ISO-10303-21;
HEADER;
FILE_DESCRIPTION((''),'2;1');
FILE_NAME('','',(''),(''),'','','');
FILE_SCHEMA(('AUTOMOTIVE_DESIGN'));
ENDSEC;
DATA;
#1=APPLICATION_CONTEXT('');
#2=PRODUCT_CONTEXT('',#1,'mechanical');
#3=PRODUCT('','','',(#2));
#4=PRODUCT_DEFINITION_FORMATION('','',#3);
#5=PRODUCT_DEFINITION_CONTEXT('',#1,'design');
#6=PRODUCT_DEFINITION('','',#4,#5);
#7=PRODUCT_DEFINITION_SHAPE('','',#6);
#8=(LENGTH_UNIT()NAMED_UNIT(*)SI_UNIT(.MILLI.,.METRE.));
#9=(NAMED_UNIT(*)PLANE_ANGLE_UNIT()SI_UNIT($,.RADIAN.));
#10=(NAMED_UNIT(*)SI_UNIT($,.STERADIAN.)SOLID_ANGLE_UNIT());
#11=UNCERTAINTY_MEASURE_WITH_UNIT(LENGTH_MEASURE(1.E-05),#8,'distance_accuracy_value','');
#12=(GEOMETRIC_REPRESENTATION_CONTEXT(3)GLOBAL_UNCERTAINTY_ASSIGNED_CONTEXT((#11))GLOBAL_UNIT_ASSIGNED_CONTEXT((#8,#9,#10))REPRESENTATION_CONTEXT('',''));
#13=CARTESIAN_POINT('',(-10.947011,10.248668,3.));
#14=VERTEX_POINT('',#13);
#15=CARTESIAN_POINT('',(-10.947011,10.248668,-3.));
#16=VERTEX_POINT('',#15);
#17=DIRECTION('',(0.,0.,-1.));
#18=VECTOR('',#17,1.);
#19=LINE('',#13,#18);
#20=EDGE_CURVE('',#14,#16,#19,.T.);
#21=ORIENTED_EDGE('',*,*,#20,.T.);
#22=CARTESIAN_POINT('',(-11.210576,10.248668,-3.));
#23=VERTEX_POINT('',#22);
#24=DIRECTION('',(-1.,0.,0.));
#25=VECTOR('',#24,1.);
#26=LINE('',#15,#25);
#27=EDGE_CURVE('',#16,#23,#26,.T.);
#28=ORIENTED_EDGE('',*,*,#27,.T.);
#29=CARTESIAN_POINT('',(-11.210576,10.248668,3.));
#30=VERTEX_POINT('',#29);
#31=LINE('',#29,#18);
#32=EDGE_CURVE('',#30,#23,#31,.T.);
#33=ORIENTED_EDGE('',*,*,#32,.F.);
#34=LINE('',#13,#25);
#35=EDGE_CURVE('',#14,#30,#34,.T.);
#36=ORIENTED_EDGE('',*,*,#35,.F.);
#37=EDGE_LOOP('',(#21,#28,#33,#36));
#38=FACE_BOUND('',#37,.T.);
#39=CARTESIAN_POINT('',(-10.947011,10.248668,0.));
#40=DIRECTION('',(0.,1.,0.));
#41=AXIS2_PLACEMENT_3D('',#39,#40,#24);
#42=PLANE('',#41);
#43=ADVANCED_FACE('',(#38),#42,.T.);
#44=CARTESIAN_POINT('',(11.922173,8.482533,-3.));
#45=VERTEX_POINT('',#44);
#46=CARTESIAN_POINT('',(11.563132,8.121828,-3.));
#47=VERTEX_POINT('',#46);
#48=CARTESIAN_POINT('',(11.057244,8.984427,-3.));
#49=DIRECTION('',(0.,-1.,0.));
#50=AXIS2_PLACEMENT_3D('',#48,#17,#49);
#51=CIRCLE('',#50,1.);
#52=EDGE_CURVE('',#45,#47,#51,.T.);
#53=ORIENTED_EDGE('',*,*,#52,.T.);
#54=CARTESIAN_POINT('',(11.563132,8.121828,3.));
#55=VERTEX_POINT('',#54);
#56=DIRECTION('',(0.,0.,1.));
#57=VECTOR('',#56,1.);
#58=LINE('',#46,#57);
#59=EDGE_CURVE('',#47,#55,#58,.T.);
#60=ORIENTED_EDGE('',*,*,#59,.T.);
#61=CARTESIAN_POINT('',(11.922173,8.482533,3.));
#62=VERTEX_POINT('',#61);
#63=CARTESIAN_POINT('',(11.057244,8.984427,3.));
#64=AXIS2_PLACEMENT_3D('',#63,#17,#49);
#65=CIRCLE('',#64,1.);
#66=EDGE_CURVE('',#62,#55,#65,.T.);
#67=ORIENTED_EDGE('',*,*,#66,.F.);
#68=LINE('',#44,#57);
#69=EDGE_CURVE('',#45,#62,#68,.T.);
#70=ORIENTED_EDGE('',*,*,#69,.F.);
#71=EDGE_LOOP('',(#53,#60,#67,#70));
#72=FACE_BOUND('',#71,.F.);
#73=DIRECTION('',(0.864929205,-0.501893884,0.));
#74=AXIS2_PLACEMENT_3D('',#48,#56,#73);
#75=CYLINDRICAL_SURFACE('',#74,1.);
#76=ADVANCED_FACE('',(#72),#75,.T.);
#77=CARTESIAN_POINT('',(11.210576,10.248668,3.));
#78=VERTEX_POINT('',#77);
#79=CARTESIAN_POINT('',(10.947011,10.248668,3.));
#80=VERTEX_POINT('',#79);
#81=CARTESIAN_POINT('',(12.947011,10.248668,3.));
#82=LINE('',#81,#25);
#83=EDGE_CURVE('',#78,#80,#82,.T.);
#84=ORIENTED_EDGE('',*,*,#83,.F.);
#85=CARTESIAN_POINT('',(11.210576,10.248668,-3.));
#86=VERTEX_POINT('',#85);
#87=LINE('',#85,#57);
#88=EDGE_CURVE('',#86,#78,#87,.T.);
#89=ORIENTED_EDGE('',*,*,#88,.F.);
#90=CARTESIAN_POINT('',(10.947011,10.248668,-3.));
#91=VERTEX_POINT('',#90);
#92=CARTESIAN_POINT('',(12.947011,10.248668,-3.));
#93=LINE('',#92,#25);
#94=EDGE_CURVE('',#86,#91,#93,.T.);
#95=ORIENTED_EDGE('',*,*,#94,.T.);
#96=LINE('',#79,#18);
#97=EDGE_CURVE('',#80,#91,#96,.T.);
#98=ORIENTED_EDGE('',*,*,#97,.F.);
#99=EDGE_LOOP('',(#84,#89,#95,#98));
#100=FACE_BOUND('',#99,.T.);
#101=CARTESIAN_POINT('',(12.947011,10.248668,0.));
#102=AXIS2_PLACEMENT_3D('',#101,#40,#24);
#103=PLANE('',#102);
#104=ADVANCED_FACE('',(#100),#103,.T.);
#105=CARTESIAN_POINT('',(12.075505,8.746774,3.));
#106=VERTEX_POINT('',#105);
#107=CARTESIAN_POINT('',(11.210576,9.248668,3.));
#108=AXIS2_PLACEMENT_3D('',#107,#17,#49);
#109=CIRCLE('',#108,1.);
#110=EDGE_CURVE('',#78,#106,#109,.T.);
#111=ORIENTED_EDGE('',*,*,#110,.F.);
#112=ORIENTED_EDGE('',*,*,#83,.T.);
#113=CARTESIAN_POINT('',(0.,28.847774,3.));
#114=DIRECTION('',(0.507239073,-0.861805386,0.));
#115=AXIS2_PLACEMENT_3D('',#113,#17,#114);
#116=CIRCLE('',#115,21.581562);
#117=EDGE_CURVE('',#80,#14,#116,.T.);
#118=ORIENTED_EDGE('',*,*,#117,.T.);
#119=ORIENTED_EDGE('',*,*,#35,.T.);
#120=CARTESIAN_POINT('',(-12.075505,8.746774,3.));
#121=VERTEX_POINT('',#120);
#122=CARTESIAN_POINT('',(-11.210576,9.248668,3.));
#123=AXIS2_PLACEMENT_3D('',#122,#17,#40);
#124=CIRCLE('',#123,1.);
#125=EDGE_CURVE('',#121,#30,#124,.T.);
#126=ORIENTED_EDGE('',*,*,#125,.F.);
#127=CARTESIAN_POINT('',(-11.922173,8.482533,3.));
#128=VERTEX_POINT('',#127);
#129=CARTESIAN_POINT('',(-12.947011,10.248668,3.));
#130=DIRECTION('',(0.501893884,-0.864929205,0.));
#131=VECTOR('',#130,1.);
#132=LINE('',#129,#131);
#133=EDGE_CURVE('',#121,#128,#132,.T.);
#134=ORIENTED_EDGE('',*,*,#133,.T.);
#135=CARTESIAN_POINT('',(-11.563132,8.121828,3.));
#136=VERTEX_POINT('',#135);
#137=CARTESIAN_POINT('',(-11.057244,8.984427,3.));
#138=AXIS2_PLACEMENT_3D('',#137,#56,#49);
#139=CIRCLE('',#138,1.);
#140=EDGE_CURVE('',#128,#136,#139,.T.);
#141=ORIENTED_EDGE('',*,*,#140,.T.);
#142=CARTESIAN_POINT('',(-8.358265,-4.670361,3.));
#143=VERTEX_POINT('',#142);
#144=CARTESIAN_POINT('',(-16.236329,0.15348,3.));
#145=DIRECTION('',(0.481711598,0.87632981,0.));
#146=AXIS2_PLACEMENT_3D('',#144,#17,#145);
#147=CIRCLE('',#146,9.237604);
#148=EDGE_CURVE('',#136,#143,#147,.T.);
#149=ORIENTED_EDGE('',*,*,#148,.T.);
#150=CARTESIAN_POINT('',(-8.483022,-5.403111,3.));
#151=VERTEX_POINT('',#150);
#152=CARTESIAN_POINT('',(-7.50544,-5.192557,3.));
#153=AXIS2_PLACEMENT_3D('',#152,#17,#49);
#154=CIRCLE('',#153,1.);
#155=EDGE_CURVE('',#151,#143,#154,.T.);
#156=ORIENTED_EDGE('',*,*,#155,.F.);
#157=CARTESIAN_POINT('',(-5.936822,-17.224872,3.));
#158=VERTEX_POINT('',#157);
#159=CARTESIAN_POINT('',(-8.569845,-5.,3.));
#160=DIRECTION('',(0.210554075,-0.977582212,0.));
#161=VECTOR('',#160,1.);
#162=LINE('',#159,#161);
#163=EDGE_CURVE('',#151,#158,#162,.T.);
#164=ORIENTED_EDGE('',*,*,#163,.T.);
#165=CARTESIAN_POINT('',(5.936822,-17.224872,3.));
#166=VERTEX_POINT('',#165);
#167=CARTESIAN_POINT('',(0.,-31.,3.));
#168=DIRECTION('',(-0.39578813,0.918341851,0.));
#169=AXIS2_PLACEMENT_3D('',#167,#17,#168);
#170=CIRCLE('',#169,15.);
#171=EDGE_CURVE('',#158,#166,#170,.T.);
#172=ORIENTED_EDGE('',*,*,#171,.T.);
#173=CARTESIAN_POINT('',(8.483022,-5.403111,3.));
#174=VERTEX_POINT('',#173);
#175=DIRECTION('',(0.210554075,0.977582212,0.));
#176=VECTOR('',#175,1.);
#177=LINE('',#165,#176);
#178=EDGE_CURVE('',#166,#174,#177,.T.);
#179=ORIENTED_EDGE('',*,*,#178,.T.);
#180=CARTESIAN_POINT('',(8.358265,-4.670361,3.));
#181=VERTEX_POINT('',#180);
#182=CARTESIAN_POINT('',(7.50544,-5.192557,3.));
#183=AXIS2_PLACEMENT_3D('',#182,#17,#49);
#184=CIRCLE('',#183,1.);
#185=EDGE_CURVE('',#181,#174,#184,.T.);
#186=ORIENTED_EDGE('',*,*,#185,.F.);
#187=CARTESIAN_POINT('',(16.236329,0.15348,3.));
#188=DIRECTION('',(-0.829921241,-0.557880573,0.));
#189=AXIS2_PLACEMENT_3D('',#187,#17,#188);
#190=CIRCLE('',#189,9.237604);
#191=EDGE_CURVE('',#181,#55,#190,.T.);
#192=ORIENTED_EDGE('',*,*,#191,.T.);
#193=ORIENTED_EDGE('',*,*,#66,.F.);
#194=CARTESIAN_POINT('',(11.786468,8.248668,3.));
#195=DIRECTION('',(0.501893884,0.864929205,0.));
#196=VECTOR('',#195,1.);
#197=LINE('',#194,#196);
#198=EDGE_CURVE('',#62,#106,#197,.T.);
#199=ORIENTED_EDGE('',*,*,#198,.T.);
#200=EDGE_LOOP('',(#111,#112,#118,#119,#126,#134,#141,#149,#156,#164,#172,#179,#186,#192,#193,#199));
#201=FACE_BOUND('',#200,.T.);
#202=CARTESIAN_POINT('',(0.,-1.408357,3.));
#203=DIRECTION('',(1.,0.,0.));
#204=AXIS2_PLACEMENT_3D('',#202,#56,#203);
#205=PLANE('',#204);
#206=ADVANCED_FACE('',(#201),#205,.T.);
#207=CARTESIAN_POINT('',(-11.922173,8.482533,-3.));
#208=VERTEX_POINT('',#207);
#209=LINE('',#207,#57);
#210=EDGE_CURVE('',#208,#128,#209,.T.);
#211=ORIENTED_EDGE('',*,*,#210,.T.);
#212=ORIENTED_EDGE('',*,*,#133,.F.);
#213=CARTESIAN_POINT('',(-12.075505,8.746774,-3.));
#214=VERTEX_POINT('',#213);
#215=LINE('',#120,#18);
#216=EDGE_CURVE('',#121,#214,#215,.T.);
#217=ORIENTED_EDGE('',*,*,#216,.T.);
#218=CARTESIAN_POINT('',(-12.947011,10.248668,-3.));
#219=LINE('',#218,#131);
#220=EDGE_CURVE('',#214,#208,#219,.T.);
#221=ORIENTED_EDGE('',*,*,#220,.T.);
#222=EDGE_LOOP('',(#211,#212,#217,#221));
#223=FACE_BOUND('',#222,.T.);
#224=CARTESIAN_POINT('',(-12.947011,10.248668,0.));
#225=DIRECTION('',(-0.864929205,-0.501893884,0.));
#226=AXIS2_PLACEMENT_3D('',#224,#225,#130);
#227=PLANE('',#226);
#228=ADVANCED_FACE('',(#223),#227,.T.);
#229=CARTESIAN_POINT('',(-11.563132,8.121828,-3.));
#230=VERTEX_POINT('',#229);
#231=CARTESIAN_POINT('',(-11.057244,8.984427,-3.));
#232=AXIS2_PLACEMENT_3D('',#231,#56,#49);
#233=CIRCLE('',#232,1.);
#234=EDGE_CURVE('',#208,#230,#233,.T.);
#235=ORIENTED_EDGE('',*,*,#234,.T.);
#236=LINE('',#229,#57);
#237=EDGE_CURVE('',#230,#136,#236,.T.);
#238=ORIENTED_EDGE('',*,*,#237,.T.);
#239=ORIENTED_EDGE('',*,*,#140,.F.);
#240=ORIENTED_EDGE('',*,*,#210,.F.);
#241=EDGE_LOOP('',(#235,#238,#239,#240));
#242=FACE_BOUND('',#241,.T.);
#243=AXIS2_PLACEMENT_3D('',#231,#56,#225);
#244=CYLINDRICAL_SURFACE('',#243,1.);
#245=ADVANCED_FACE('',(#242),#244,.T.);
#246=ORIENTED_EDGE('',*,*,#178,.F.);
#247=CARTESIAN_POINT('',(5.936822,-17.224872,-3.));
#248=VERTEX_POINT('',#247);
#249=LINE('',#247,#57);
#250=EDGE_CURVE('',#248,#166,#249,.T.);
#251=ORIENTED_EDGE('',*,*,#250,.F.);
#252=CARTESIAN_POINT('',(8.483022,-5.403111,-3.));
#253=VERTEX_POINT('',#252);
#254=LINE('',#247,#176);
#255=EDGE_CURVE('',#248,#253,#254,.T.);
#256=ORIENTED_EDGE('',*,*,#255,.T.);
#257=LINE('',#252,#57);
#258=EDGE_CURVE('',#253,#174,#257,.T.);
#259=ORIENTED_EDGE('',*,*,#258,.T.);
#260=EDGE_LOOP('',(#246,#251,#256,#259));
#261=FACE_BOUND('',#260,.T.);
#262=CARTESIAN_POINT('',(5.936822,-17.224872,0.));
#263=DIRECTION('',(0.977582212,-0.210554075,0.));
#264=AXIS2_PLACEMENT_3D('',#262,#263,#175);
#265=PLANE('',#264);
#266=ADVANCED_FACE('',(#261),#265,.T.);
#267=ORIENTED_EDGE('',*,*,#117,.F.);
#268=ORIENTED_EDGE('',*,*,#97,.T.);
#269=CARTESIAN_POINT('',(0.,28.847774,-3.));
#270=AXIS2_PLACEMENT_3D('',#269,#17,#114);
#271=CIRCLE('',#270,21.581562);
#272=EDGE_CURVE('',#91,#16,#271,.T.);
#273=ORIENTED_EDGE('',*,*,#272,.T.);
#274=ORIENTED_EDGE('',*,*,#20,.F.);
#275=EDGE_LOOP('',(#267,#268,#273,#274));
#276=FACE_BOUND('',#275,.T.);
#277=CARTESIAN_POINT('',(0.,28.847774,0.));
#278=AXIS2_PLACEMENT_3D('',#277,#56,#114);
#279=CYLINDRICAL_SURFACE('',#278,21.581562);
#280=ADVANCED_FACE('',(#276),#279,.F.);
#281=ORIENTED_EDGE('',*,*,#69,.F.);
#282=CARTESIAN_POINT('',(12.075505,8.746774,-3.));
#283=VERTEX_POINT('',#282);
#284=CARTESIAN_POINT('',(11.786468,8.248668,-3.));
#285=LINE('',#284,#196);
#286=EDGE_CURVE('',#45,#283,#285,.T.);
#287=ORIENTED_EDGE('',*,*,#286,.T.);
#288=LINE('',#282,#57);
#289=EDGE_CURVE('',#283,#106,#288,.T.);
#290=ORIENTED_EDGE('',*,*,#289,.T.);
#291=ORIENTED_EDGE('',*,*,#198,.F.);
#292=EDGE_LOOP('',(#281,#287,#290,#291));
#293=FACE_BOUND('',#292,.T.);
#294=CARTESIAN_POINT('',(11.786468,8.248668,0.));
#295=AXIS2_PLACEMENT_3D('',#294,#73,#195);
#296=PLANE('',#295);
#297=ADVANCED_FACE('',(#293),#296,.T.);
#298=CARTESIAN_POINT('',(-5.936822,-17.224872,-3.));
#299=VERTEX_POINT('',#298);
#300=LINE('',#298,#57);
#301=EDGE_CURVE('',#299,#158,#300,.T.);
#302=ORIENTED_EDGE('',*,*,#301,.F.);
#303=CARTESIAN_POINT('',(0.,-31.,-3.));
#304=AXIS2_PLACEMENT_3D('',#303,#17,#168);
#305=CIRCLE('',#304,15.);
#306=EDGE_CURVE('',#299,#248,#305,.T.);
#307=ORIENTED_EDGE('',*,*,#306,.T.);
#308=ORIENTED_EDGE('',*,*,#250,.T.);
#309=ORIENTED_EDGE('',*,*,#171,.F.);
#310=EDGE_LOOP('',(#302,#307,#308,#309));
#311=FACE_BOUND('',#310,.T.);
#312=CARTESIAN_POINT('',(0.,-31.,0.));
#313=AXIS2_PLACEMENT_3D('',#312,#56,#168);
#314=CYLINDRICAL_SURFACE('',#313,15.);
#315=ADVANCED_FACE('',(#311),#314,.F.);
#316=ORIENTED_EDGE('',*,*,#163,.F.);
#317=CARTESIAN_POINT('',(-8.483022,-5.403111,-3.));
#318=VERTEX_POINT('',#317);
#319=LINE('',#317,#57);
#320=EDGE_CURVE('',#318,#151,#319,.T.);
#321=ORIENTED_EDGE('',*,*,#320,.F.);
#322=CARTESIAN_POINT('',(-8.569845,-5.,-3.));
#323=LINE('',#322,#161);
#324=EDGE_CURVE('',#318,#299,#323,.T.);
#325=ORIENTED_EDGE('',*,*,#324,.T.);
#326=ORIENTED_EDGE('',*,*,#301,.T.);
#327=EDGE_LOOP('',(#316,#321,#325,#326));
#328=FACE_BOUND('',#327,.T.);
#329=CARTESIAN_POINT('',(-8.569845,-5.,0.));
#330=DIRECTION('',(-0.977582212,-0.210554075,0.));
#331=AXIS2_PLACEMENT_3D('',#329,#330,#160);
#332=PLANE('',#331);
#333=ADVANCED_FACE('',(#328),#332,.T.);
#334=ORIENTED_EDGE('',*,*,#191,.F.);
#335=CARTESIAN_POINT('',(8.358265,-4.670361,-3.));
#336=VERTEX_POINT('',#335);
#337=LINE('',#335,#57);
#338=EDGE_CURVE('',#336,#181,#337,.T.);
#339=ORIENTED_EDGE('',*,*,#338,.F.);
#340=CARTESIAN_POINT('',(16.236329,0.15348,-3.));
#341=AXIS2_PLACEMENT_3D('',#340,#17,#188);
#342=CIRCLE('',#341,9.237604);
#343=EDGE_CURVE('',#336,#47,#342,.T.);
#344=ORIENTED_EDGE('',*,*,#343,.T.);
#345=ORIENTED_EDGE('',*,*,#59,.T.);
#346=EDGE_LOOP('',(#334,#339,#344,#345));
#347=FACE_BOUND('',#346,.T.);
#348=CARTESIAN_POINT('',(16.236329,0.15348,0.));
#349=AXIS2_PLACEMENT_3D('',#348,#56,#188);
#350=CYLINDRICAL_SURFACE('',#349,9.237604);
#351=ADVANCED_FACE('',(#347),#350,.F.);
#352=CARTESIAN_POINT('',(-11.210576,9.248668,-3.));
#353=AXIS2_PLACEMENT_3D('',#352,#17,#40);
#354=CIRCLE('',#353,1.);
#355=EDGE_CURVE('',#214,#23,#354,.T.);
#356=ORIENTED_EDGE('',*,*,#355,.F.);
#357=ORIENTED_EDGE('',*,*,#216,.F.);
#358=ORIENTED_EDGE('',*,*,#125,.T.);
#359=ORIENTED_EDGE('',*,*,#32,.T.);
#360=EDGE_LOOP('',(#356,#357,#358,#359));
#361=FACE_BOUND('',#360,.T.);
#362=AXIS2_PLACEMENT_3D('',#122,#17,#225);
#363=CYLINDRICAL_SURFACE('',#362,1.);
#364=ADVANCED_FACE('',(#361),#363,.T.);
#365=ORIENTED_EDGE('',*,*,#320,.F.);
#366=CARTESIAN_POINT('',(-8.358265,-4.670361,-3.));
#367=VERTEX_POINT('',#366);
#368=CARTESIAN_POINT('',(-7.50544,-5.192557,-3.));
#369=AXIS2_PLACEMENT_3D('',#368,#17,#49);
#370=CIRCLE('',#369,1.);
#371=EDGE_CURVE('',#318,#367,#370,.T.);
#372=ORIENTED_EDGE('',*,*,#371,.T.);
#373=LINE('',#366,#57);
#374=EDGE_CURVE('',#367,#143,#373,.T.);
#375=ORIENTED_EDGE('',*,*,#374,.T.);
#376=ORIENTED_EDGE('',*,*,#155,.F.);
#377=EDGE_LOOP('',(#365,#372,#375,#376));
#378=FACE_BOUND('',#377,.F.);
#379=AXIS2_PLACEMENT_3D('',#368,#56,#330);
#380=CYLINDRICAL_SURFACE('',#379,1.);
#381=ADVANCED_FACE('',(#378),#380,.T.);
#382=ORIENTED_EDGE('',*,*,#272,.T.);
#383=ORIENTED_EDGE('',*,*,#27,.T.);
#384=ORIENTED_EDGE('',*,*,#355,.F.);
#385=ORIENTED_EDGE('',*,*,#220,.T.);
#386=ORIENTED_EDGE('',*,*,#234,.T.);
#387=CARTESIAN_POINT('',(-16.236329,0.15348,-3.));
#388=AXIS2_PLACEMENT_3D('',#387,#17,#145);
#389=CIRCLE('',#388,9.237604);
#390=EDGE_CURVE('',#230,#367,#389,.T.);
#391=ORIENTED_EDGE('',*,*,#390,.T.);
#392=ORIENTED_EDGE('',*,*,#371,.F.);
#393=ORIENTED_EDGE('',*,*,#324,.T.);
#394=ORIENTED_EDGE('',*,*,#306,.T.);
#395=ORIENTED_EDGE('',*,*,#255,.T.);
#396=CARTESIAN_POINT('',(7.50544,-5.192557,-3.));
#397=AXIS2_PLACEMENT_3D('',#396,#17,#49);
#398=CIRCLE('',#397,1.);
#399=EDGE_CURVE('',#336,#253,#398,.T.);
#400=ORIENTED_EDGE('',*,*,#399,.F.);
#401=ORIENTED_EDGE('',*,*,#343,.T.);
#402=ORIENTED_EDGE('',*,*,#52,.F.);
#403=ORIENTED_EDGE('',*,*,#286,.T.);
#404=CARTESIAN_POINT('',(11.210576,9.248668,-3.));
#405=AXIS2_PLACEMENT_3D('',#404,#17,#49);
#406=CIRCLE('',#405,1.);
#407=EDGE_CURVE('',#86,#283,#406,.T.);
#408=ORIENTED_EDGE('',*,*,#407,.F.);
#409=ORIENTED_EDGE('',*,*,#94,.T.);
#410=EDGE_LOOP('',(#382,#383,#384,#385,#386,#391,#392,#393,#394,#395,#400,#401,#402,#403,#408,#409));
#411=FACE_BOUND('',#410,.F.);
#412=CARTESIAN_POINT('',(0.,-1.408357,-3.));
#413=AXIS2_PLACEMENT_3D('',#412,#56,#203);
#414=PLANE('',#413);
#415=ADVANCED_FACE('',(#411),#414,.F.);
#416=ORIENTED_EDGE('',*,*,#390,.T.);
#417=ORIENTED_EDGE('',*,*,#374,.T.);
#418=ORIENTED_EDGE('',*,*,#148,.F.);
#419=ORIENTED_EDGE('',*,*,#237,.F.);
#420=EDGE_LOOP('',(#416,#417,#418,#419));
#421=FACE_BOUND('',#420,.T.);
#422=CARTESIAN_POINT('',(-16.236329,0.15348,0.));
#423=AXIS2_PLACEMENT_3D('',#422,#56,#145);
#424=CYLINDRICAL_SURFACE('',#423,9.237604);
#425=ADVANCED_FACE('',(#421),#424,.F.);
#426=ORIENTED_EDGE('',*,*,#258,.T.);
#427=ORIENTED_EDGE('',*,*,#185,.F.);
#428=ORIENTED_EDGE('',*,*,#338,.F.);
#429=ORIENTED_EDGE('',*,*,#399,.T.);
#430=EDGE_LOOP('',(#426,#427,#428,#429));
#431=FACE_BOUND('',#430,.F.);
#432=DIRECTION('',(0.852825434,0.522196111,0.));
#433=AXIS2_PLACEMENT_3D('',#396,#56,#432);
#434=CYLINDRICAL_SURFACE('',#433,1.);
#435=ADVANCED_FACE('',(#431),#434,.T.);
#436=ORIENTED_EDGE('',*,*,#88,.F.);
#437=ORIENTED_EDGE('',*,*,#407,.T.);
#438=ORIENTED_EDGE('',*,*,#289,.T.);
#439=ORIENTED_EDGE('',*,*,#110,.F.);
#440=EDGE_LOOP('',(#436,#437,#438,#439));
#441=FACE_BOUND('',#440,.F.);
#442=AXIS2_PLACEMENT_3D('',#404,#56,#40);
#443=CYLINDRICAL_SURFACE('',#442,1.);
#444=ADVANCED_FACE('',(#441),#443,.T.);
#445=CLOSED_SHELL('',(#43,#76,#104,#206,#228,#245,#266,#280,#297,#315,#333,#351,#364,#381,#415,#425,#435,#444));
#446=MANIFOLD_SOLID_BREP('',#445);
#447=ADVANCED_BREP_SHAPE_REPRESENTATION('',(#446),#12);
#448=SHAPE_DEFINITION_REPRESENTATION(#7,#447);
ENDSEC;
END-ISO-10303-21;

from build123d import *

# Parameters (mm, degrees)
F1_DEPTH = 3
F2_R     = 1


# Not quite as in the source:
# - a feature names something its author has since deleted; it is built from what else it names


with BuildPart() as f1:
    # F0 (on Top) → F1 (new body, symmetric)
    with BuildSketch(Plane.XY):
        with BuildLine():
            Line((-12.9470113486, 10.248668018), (-11.7864680784, 8.248668018))
            ThreePointArc((-11.7864680784, 8.248668018), (-7.2595115052, 2.3329471863), (-8.5698451786, -5))
            Line((-8.5698451786, -5), (-5.9368219527, -17.2248722292))
            ThreePointArc((-5.9368219527, -17.2248722292), (0, -16), (5.9368219527, -17.2248722292))
            Line((5.9368219527, -17.2248722292), (8.5698451786, -5))
            ThreePointArc((8.5698451786, -5), (7.2595115052, 2.3329471863), (11.7864680784, 8.248668018))
            Line((11.7864680784, 8.248668018), (12.9470113486, 10.248668018))
            Line((12.9470113486, 10.248668018), (10.9470113486, 10.248668018))
            ThreePointArc((10.9470113486, 10.248668018), (0, 7.2662124228), (-10.9470113486, 10.248668018))
            Line((-10.9470113486, 10.248668018), (-12.9470113486, 10.248668018))
        make_face()
    extrude(amount=F1_DEPTH, both=True)

    # F2
    f2_edges = [f1.edges().sort_by_distance(p)[0] for p in [
        (-12.947011, 10.248668, 0),
        (12.947011, 10.248668, 0),
        (-8.569845, -5, 0),
        (8.569845, -5, 0),
        (11.786468, 8.248668, 0),
        (-11.786468, 8.248668, 0),
    ]]
    fillet(f2_edges, radius=F2_R)


solid = f1.part
